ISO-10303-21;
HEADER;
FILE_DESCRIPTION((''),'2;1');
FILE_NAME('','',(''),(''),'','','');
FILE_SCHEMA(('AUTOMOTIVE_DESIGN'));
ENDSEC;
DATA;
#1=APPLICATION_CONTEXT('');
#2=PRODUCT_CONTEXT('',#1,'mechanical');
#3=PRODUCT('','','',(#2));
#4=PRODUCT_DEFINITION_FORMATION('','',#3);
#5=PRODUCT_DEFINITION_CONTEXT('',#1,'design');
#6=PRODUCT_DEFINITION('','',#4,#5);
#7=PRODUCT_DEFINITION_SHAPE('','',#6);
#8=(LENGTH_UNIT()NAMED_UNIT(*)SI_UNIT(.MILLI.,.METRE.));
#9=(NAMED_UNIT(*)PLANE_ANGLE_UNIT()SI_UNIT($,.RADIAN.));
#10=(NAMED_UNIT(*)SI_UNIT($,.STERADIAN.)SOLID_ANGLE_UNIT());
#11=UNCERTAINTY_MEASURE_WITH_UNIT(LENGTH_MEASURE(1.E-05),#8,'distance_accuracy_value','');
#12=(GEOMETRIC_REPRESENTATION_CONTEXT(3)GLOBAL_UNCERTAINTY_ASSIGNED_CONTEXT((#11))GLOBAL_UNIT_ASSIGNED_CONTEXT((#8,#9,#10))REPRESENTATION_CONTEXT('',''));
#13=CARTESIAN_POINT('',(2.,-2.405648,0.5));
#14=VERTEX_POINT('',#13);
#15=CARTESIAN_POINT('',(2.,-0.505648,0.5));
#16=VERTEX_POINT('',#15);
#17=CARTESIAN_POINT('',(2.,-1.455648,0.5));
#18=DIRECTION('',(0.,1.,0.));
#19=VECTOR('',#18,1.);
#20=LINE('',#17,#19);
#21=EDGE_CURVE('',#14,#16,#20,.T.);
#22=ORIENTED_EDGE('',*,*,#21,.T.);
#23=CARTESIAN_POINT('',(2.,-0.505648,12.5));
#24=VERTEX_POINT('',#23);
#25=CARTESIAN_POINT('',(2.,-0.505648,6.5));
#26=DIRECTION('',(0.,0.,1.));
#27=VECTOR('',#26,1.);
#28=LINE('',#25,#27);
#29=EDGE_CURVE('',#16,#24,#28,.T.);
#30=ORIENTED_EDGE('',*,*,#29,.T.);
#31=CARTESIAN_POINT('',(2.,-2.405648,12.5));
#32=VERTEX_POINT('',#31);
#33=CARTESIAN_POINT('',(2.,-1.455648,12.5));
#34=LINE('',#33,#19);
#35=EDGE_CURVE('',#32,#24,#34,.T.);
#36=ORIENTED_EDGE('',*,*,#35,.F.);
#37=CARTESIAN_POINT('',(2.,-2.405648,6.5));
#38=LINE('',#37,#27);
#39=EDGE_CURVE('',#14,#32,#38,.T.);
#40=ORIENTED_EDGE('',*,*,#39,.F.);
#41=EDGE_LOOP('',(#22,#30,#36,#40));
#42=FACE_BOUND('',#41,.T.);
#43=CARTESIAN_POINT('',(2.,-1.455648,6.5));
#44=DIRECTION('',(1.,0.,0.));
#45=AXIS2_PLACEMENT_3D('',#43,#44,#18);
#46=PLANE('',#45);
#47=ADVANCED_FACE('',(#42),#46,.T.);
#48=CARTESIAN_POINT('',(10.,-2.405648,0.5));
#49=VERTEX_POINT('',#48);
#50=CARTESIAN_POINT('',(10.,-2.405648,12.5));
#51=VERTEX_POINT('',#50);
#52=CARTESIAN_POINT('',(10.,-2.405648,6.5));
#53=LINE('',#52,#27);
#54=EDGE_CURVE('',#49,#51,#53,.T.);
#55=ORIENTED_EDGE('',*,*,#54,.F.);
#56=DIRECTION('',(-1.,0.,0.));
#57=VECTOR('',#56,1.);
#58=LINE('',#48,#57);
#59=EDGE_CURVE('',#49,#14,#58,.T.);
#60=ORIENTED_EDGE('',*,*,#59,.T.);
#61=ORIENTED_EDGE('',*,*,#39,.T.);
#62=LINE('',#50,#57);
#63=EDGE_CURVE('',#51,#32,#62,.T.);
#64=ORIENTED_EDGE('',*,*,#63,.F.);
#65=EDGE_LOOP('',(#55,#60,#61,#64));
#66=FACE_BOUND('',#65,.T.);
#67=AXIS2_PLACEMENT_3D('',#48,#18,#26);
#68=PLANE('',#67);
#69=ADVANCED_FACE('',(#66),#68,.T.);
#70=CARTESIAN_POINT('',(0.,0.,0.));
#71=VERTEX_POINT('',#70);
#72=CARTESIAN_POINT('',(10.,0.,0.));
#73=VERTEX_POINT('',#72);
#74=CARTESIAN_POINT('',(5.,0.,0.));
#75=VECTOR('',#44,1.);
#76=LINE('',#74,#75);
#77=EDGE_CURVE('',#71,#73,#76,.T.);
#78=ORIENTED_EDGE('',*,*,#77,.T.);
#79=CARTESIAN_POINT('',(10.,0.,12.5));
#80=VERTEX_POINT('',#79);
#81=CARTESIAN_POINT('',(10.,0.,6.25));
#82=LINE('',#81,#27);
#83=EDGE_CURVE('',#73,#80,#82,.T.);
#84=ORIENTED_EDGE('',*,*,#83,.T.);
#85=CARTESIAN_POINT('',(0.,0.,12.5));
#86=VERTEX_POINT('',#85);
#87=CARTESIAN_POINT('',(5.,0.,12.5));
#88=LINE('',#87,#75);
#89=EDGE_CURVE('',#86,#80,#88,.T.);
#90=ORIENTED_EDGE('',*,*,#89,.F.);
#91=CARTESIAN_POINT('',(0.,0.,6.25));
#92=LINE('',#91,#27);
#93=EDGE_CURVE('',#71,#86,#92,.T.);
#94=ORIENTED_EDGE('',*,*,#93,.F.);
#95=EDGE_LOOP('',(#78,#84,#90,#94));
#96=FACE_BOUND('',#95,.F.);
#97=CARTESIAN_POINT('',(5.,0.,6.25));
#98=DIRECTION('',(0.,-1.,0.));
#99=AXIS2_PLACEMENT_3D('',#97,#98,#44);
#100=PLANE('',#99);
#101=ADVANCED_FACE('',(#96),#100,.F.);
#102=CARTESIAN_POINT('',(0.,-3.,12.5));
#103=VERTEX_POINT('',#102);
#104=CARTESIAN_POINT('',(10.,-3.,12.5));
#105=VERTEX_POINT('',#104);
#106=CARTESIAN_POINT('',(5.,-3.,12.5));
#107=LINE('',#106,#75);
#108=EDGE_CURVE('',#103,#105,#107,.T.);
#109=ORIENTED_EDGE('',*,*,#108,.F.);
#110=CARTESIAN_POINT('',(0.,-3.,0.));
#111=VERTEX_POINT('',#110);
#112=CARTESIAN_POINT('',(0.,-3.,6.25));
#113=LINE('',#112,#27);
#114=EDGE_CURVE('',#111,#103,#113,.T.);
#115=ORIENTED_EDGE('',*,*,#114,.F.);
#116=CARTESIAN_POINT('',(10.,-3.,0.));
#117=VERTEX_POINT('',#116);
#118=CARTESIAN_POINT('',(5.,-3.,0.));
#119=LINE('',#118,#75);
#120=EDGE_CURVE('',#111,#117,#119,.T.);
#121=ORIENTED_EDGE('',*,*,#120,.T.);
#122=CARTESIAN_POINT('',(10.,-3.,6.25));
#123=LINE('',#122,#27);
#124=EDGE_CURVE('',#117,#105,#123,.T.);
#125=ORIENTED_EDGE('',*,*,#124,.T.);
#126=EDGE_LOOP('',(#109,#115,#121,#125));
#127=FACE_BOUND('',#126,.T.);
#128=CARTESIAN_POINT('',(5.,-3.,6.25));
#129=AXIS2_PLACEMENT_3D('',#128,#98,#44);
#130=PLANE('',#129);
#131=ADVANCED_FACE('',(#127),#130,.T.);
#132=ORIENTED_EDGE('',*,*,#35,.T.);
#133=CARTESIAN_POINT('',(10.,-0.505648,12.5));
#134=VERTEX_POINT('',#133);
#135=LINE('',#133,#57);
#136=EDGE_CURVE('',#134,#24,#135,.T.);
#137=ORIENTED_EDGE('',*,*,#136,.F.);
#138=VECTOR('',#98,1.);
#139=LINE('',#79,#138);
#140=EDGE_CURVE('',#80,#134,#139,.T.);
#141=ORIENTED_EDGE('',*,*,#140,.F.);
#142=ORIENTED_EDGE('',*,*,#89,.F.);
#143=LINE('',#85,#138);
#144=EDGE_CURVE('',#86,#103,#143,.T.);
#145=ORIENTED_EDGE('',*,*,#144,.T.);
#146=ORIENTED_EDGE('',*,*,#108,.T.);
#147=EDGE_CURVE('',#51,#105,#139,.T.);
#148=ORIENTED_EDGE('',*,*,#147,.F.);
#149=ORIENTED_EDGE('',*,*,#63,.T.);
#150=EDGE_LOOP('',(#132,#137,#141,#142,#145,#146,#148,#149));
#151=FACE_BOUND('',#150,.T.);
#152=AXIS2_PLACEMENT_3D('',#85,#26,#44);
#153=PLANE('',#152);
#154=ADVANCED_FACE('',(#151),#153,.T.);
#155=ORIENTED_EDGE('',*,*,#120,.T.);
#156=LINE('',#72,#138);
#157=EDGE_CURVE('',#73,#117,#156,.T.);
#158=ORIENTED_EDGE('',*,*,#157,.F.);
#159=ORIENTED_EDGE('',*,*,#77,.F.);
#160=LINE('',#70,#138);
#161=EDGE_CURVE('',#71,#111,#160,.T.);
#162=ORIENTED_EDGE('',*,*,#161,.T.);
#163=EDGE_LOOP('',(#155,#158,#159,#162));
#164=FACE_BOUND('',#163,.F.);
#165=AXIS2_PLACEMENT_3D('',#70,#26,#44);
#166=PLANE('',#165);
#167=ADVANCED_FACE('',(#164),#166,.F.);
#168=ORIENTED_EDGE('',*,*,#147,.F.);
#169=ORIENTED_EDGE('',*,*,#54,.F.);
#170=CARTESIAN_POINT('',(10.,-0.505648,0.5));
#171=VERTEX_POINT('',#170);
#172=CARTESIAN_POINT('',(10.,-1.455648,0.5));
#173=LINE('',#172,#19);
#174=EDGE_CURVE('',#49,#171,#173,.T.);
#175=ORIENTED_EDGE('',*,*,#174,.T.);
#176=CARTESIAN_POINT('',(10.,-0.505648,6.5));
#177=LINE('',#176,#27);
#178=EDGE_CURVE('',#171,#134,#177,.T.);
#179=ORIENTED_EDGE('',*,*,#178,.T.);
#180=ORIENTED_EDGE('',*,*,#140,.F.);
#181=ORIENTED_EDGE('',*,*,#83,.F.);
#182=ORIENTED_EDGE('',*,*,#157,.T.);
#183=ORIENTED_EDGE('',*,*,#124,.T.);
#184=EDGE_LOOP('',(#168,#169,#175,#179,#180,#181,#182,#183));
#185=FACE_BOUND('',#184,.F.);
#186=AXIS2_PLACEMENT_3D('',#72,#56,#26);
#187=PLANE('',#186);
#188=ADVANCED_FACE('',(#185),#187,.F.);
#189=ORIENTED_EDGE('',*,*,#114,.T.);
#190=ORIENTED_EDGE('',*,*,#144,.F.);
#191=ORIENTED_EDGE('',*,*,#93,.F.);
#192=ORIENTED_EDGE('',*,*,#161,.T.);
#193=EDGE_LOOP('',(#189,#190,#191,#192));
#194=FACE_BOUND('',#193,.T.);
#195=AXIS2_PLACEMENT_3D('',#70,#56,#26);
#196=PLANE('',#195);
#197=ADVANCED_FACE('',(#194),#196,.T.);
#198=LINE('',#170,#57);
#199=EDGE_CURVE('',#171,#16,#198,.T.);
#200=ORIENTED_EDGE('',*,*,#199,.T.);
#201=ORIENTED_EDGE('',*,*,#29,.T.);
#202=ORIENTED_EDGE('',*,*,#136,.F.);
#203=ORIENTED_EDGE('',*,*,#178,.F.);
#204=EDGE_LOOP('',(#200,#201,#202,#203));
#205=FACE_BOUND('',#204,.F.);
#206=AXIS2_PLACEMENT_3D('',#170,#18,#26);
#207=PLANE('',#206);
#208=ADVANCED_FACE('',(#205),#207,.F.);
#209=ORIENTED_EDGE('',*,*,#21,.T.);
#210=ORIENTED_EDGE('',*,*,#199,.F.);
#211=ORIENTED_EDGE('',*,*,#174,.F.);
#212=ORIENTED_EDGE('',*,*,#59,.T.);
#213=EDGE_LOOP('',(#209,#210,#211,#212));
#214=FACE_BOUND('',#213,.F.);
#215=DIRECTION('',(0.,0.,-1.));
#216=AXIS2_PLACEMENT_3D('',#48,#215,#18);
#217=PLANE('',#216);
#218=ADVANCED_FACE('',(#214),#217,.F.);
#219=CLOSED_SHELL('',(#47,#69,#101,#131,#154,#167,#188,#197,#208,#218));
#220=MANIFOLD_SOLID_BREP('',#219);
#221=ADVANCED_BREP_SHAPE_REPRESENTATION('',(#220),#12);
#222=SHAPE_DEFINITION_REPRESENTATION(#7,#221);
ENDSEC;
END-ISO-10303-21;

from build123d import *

# Parameters (mm, degrees)
F0_W     = 10
F0_H     = 12.5
F1_DEPTH = 3
F2_W     = 1.9
F2_H     = 12
F3_DEPTH = 8


# Not quite as in the source:
# - a feature names something its author has since deleted; it is built from what else it names


with BuildPart() as f1:
    # F0 (on Front) → F1 (new body)
    with BuildSketch(Plane.XZ):
        with Locations((5, 6.25)):
            Rectangle(F0_W, F0_H)
    extrude(amount=F1_DEPTH)

    # F2 (on face) → F3 (cut)
    with BuildSketch(Plane.YZ.offset(10)):
        with Locations((-1.4556478869, 6.5)):
            Rectangle(F2_W, F2_H)
    extrude(amount=-F3_DEPTH, mode=Mode.SUBTRACT)


solid = f1.part
